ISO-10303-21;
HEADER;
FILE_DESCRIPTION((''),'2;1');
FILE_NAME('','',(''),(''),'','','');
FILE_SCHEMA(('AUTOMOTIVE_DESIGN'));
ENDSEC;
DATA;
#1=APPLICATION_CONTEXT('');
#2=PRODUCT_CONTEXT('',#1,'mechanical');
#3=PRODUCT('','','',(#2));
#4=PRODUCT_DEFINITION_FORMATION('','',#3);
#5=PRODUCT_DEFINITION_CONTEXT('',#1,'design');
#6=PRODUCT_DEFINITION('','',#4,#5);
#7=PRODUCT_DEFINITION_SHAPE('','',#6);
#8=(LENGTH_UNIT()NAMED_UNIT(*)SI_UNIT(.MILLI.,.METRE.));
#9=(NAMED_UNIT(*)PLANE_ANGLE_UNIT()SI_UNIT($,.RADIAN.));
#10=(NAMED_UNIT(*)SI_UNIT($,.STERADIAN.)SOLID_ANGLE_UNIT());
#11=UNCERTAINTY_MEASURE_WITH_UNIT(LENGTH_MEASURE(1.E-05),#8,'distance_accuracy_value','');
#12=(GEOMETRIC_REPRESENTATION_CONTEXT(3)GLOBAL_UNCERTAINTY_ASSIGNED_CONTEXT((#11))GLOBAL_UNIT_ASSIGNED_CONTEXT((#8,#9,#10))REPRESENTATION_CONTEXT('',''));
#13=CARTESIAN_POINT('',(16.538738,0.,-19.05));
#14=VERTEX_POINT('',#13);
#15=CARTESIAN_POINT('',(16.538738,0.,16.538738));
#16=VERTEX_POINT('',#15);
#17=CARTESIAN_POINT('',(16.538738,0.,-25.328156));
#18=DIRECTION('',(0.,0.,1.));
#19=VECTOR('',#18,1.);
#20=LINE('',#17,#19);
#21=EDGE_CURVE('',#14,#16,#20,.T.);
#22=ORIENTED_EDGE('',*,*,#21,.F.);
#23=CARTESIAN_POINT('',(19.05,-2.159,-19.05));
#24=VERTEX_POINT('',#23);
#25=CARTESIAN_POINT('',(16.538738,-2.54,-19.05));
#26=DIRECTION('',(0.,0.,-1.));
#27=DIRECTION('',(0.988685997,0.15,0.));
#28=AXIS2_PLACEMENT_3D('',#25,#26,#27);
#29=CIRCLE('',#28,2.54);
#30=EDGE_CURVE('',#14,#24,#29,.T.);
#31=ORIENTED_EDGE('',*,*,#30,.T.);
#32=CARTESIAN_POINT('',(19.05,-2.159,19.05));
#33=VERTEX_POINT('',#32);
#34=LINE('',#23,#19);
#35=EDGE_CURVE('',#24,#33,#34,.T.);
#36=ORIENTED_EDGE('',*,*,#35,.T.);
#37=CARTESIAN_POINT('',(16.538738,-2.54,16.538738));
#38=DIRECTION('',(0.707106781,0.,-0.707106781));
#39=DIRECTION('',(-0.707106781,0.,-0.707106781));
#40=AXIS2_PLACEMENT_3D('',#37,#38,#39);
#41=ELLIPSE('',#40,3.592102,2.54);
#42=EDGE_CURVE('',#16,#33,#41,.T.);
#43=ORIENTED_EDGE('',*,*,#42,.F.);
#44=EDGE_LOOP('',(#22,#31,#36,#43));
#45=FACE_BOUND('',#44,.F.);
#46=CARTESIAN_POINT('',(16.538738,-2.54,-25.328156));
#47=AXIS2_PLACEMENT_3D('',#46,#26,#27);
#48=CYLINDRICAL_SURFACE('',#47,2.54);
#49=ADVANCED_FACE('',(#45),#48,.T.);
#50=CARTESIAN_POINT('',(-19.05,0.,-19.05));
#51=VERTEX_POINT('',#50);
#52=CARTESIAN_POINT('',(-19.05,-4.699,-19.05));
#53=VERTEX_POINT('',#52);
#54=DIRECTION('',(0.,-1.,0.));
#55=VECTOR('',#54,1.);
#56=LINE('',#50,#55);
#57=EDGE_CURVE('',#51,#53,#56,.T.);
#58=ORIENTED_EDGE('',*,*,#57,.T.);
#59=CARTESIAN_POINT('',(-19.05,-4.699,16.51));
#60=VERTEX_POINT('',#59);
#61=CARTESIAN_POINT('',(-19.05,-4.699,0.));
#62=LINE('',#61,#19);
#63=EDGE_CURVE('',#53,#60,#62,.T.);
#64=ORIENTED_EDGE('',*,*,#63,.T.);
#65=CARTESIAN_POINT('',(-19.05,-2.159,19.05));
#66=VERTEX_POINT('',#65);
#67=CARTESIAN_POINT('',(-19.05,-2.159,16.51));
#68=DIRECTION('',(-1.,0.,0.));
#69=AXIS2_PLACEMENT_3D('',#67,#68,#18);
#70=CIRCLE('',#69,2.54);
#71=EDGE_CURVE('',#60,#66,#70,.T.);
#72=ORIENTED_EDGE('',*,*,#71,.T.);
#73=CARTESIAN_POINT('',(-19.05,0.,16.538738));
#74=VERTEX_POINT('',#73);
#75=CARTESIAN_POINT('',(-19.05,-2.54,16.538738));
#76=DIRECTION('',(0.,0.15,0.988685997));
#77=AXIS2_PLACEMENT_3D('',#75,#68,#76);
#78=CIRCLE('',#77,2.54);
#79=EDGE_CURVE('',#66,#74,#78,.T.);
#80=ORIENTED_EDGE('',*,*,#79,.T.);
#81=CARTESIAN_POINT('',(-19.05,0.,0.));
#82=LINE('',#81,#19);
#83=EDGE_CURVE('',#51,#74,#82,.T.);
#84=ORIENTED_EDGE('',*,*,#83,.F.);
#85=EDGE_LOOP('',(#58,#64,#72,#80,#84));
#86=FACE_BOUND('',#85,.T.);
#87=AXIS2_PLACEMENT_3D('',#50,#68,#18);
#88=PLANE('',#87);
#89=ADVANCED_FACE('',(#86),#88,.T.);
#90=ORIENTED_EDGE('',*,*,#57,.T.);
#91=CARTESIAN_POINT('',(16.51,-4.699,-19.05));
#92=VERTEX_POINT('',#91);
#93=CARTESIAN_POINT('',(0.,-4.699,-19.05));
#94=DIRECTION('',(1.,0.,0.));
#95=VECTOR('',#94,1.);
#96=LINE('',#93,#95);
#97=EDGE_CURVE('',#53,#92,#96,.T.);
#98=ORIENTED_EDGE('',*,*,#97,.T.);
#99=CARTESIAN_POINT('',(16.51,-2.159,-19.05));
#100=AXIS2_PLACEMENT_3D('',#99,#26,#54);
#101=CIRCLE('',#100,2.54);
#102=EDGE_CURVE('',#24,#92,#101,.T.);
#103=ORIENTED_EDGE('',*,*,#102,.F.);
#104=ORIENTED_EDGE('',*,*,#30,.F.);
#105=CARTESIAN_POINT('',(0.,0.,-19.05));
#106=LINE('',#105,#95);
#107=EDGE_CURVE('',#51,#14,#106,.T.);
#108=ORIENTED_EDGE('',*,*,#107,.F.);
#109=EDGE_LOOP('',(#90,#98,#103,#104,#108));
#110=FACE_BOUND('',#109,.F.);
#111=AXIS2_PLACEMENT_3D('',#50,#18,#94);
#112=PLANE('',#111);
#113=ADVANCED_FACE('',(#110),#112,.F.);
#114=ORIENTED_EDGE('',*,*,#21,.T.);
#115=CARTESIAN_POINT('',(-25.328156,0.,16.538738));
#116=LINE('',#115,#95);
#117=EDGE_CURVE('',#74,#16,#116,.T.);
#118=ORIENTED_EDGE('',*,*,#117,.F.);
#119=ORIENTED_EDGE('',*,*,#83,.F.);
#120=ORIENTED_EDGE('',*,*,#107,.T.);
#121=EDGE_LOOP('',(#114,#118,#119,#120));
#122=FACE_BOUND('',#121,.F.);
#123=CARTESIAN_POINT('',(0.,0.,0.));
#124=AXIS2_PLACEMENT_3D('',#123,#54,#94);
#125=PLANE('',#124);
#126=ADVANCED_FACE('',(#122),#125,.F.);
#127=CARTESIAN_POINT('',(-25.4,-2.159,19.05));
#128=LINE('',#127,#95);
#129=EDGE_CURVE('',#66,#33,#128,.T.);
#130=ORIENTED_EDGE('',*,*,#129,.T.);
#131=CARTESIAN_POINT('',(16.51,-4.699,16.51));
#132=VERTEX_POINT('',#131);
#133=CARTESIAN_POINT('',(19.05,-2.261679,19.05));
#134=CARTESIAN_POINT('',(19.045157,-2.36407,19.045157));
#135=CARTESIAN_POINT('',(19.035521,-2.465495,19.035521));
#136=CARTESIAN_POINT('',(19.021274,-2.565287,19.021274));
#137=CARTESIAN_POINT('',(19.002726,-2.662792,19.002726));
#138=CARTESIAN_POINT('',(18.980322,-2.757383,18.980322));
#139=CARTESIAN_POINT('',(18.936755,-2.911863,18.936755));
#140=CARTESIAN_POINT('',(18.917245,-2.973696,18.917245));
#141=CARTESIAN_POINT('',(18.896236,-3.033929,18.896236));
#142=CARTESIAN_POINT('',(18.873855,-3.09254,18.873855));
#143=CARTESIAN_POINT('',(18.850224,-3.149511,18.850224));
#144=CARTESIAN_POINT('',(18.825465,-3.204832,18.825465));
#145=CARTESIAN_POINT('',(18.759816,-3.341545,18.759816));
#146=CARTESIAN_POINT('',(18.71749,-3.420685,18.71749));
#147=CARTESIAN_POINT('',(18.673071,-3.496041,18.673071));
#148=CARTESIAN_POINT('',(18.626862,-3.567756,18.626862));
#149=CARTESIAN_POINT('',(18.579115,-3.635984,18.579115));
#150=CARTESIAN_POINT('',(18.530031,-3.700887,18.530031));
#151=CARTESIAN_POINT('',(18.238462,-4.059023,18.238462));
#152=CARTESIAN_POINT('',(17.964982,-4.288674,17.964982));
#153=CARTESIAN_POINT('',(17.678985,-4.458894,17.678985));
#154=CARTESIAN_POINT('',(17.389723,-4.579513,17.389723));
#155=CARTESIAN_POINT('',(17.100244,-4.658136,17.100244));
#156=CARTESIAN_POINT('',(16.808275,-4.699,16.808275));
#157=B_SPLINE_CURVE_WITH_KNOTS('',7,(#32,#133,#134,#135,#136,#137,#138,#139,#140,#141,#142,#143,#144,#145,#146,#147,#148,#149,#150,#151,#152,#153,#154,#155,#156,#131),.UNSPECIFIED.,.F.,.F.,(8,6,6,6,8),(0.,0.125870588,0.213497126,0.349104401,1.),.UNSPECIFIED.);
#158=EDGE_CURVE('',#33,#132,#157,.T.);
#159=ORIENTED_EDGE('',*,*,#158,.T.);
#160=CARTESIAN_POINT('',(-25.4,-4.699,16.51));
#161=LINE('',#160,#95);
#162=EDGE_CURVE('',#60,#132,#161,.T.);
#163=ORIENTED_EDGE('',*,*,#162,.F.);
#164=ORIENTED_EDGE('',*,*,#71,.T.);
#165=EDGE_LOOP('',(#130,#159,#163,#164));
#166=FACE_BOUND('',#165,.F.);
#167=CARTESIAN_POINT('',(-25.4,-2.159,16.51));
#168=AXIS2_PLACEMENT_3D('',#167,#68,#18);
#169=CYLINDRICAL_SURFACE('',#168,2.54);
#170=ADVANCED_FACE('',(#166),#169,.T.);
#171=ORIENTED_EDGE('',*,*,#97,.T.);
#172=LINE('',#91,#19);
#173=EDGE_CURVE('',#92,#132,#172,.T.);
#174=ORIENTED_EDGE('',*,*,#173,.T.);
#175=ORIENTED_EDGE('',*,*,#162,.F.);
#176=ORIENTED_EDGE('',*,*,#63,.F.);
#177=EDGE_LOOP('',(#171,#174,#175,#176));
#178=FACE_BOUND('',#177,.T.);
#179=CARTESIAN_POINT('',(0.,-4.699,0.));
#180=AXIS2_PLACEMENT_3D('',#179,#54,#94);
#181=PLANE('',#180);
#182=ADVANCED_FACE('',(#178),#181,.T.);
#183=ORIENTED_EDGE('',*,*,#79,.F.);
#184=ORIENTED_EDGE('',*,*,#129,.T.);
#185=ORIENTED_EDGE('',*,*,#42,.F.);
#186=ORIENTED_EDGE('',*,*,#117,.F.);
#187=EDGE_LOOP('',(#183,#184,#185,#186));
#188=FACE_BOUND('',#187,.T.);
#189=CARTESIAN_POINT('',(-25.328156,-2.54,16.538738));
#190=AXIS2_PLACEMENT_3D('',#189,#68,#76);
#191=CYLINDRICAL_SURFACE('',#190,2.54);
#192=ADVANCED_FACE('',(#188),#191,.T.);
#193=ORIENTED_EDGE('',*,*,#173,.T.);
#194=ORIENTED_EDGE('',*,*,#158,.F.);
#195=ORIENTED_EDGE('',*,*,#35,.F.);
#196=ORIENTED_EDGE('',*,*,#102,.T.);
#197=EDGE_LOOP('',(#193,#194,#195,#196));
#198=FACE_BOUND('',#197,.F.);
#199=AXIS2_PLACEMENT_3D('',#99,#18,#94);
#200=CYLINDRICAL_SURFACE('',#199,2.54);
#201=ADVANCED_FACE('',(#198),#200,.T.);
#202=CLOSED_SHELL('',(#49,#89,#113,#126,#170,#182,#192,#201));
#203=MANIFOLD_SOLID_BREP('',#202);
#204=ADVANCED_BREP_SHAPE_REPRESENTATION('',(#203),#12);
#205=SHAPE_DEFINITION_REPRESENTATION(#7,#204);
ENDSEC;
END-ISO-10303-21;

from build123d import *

# Parameters (mm, degrees)
F0_W        = 38.1
F0_H        = 38.1
F1_DEPTH    = 4.699
F2_R        = 2.54
F3_T1_DEPTH = 50.6563121576
F4_T1_DEPTH = 48.26
F5_T1_DEPTH = 48.1450497261


# Not quite as in the source:
# - a fillet or chamfer that OpenCascade refuses, or shapes differently, is made with other operations: its cross-section is extruded or revolved along the edge and cut away or added


with BuildPart() as f1:
    # F0 (on Front) → F1 (new body)
    with BuildSketch(Plane.XZ):
        Rectangle(F0_W, F0_H)
    extrude(amount=F1_DEPTH)

    # F2
    f2_edges = [f1.edges().sort_by_distance(p)[0] for p in [
        (19.05, -4.699, 0),
    ]]
    fillet(f2_edges, radius=F2_R)

    # F3: fillet of radius 2.54 on 1 edges, made by hand

    # F3_s2 → F3_t1 (cut)
    with BuildSketch(Plane.XY.offset(-25.3281560788)):
        with BuildLine():
            ThreePointArc((19.05, -2.159), (18.1946149794, -0.6139496372), (16.5387375685, 0))
            Line((16.5387375685, 0), (19.05, 0))
            Line((19.05, 0), (19.05, -2.159))
        make_face()
    extrude(amount=F3_T1_DEPTH, mode=Mode.SUBTRACT)

    # F4: fillet of radius 2.54 on 1 edges, made by hand

    # F4_s2 → F4_t1 (cut)
    with BuildSketch(Plane.YZ.offset(-25.4)):
        with BuildLine():
            ThreePointArc((-2.159, 19.05), (-3.9550512242, 18.3060512242), (-4.699, 16.51))
            Line((-4.699, 16.51), (-4.699, 19.05))
            Line((-4.699, 19.05), (-2.159, 19.05))
        make_face()
    extrude(amount=F4_T1_DEPTH, mode=Mode.SUBTRACT)

    # F5: fillet of radius 2.54 on 1 edges, made by hand

    # F5_s2 → F5_t1 (cut)
    with BuildSketch(Plane.YZ.offset(-25.3281560788)):
        with BuildLine():
            ThreePointArc((-2.159, 19.05), (-0.6139496372, 18.1946149794), (0, 16.5387375685))
            Line((0, 16.5387375685), (0, 19.05))
            Line((0, 19.05), (-2.159, 19.05))
        make_face()
    extrude(amount=F5_T1_DEPTH, mode=Mode.SUBTRACT)


solid = f1.part
